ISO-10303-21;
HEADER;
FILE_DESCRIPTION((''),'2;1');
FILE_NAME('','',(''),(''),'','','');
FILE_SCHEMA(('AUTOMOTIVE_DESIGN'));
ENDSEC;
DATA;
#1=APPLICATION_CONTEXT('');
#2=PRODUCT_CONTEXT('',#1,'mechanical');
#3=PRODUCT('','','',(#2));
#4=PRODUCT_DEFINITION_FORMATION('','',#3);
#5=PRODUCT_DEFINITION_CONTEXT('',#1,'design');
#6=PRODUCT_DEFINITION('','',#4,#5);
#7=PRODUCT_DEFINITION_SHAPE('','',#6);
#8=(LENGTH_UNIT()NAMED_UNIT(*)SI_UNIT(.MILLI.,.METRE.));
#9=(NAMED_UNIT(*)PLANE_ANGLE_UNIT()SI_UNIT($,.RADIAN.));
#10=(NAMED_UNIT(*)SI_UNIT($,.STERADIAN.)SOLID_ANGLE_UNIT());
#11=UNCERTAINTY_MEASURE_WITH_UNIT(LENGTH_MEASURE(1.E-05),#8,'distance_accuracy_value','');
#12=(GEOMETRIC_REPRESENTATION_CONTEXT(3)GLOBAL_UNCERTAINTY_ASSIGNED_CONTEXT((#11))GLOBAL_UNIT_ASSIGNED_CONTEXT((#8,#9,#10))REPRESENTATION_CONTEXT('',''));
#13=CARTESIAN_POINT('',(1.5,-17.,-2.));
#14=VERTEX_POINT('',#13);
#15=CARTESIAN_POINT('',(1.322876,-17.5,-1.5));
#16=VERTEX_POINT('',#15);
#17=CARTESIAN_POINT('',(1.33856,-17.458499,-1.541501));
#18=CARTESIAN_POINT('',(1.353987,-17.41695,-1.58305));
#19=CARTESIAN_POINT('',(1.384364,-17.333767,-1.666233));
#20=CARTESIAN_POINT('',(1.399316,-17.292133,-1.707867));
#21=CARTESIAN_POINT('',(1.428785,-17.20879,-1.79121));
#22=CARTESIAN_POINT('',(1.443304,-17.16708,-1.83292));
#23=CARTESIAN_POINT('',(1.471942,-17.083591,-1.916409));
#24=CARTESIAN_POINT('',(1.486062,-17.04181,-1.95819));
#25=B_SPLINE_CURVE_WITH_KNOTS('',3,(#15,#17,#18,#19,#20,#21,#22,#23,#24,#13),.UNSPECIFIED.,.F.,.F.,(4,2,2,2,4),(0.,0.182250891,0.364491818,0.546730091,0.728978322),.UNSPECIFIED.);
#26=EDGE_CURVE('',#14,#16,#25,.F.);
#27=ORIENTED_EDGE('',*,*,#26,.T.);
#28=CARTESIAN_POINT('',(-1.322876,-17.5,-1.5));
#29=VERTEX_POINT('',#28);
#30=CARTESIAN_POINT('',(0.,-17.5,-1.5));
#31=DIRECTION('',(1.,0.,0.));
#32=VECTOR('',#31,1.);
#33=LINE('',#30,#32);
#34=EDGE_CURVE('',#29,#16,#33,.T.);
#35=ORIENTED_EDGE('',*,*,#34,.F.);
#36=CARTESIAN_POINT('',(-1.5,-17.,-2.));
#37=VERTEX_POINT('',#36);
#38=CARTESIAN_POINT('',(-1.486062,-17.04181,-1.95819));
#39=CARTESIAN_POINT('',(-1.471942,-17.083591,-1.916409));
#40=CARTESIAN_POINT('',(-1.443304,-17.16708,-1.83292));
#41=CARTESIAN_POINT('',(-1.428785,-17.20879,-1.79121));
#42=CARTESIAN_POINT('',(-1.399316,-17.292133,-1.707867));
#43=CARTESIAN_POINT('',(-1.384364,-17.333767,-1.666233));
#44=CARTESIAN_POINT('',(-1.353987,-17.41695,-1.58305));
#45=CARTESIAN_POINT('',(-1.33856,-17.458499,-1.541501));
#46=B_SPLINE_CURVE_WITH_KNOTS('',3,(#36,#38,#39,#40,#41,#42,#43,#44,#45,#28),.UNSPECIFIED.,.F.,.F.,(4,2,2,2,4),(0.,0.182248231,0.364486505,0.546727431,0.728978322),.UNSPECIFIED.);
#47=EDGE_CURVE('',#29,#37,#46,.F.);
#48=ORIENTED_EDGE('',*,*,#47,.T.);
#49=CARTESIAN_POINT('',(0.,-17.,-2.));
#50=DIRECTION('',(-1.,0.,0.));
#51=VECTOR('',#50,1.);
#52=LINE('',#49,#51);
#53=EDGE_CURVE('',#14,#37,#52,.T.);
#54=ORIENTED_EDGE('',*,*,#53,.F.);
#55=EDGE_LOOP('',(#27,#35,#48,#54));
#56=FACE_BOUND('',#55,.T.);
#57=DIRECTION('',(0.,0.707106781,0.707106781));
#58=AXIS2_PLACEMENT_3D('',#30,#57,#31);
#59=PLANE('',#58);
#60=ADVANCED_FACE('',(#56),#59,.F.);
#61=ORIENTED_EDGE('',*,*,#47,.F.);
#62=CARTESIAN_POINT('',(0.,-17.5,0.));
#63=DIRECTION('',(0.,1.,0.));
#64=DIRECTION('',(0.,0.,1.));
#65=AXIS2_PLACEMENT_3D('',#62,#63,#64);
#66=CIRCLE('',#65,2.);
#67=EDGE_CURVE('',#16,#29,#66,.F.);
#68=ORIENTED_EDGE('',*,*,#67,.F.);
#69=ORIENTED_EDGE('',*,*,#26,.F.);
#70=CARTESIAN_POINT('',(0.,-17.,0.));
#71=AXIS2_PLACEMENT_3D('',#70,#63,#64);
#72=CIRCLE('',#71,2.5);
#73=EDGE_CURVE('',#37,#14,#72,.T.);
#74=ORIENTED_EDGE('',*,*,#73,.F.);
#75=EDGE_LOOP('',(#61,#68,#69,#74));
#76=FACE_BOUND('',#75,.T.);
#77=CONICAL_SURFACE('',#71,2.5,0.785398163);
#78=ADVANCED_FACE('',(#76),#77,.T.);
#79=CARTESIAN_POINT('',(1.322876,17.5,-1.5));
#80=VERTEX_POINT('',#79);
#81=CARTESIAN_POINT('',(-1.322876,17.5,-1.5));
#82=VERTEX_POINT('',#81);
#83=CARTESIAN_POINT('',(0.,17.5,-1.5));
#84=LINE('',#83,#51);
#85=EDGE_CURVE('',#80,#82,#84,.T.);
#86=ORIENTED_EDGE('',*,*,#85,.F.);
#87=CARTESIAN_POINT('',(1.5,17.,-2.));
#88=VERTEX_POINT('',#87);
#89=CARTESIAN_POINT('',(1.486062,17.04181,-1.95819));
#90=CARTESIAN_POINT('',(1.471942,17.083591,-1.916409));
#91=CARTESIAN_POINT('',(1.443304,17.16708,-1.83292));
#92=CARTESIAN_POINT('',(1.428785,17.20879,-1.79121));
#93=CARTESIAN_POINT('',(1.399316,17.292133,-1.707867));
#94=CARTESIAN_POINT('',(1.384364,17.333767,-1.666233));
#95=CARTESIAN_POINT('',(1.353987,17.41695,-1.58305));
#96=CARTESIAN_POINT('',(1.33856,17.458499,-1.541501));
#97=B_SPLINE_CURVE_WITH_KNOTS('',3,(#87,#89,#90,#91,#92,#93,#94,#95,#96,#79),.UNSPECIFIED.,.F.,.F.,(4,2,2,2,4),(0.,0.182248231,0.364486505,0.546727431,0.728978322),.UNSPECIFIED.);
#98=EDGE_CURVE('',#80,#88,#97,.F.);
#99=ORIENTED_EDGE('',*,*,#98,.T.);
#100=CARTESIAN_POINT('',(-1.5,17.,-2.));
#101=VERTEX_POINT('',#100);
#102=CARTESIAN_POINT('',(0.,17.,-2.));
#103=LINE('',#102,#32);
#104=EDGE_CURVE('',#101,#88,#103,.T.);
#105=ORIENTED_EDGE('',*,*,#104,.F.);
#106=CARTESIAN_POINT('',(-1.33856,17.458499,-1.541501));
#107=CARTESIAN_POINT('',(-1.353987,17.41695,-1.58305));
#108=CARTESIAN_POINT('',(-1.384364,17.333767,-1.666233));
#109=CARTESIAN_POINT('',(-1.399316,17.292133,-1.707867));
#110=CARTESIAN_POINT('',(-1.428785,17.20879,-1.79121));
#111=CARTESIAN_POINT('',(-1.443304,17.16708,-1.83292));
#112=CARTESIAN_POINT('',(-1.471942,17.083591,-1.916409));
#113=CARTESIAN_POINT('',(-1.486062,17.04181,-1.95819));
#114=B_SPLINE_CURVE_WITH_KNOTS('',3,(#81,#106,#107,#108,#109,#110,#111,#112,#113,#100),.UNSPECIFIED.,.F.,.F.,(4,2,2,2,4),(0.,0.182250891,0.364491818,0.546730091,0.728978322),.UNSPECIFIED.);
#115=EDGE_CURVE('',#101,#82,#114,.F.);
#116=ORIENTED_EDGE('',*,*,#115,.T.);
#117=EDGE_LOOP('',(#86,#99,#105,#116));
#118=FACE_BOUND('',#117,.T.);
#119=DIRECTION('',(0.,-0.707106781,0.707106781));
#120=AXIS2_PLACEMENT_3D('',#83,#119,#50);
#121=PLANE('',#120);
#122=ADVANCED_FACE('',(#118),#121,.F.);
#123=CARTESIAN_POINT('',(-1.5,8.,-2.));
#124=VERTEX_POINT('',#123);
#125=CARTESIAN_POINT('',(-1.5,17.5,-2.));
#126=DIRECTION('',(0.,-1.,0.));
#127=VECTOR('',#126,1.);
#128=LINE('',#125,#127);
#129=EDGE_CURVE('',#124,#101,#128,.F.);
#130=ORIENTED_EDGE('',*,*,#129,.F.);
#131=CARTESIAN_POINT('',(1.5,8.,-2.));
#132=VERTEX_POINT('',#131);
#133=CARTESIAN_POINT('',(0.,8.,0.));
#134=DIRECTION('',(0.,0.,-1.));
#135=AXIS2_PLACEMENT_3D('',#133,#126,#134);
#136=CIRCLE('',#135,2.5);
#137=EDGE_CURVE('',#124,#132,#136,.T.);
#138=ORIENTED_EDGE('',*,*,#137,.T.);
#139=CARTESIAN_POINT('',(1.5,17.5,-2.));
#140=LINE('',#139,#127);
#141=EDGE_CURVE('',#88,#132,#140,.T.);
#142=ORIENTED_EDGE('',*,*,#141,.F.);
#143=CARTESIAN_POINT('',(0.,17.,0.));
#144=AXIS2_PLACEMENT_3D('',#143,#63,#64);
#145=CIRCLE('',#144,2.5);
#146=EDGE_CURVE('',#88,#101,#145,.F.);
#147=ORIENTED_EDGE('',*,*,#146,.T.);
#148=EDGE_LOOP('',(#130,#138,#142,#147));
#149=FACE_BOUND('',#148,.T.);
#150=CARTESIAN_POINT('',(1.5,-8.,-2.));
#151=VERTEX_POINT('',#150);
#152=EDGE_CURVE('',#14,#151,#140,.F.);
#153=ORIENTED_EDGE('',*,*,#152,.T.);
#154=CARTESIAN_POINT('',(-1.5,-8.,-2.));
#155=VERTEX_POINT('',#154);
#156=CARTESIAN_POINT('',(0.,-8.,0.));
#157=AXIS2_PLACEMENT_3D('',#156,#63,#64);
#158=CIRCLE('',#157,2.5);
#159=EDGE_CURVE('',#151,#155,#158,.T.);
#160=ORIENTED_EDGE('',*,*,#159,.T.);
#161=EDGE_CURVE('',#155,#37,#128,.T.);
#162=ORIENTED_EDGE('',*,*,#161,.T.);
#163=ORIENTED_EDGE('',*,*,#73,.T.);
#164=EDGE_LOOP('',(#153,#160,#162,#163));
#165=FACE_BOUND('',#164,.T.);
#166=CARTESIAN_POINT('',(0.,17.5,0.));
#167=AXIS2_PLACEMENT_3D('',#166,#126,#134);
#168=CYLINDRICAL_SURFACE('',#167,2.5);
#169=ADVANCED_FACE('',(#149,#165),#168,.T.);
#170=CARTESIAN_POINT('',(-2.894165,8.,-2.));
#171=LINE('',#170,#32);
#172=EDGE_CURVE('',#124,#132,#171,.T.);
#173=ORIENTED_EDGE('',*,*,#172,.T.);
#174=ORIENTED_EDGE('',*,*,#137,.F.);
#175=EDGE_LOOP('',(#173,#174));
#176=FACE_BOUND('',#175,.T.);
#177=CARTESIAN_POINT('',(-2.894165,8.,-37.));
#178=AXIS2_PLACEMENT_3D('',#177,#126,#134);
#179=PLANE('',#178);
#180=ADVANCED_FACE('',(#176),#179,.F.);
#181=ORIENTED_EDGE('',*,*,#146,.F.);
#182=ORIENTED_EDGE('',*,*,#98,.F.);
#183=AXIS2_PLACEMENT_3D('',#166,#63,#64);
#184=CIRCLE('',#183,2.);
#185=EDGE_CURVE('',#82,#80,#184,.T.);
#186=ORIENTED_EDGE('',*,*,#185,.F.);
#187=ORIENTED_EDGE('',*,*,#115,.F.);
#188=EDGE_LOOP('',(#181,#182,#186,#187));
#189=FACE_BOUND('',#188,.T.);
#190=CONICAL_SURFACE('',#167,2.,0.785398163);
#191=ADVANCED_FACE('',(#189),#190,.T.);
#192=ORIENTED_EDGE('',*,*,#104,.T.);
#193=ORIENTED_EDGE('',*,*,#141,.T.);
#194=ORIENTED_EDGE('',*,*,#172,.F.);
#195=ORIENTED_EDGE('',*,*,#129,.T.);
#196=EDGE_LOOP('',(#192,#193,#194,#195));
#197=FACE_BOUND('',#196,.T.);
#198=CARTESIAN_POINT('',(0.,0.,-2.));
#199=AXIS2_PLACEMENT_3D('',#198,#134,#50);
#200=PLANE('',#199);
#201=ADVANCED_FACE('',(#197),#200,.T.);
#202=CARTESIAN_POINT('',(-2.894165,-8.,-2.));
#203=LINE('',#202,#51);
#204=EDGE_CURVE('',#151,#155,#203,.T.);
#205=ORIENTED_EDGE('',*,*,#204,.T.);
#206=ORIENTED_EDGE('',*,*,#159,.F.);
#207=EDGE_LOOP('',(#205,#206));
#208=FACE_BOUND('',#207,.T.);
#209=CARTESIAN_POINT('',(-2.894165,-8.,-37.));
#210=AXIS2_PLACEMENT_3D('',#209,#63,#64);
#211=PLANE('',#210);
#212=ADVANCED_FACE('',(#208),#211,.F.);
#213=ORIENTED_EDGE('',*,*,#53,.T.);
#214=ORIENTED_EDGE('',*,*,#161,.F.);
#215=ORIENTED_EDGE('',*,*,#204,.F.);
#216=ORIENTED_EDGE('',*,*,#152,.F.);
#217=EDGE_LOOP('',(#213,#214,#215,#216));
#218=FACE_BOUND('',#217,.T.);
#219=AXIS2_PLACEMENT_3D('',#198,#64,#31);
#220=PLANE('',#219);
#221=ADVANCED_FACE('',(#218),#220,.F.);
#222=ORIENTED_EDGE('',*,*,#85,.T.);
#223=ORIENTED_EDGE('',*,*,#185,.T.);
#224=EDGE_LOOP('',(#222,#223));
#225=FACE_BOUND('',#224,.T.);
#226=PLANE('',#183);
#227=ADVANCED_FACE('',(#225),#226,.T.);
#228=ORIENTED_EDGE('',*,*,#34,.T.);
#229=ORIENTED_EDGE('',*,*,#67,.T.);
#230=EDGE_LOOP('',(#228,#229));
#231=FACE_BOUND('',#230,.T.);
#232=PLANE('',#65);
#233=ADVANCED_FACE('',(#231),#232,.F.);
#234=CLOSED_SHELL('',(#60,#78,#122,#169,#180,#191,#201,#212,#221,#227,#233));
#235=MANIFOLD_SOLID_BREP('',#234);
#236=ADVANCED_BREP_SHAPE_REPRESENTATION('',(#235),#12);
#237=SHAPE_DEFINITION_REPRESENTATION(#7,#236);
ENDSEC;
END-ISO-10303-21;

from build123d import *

# Parameters (mm, degrees)
SKETCH1_R           = 2.5
BOSS_EXTRUDE1_DEPTH = 17.5
CUT_EXTRUDE1_START  = -2
SKETCH3_W           = 5.788329994
SKETCH3_H           = 11.481307843
CUT_EXTRUDE1_DEPTH  = 35
CHAMFER1_SIZE       = 0.5


with BuildPart() as part:
    # Sketch1 → Boss-Extrude1 (new, symmetric)
    with BuildSketch(Plane(origin=(0, 0, 0), x_dir=(1, 0, 0), z_dir=(0, 1, 0))):
        with Locations(Location((0, 0, 0), (0, 0, 270))):
            Circle(SKETCH1_R)
    extrude(amount=BOSS_EXTRUDE1_DEPTH, both=True)

    # Sketch3 → Cut-Extrude1 (cut)
    with BuildSketch(Plane.XY.offset(CUT_EXTRUDE1_START)):
        with Locations((0, 13.740653921)):
            Rectangle(SKETCH3_W, SKETCH3_H)
        with Locations((0, -13.740653921)):
            Rectangle(SKETCH3_W, SKETCH3_H)
    extrude(amount=-CUT_EXTRUDE1_DEPTH, mode=Mode.SUBTRACT)

    # Chamfer1
    chamfer1_edges = [part.edges().sort_by_distance(p)[0] for p in [
        (-2.371708245, -17.5, 0.790569415),
        (0, -17.5, -2),
        (-2.371708245, 17.5, 0.790569415),
        (0, 17.5, -2),
    ]]
    chamfer(chamfer1_edges, length=CHAMFER1_SIZE - 0.0001)  # a hair under: the kernel refuses the full size


solid = part.part
